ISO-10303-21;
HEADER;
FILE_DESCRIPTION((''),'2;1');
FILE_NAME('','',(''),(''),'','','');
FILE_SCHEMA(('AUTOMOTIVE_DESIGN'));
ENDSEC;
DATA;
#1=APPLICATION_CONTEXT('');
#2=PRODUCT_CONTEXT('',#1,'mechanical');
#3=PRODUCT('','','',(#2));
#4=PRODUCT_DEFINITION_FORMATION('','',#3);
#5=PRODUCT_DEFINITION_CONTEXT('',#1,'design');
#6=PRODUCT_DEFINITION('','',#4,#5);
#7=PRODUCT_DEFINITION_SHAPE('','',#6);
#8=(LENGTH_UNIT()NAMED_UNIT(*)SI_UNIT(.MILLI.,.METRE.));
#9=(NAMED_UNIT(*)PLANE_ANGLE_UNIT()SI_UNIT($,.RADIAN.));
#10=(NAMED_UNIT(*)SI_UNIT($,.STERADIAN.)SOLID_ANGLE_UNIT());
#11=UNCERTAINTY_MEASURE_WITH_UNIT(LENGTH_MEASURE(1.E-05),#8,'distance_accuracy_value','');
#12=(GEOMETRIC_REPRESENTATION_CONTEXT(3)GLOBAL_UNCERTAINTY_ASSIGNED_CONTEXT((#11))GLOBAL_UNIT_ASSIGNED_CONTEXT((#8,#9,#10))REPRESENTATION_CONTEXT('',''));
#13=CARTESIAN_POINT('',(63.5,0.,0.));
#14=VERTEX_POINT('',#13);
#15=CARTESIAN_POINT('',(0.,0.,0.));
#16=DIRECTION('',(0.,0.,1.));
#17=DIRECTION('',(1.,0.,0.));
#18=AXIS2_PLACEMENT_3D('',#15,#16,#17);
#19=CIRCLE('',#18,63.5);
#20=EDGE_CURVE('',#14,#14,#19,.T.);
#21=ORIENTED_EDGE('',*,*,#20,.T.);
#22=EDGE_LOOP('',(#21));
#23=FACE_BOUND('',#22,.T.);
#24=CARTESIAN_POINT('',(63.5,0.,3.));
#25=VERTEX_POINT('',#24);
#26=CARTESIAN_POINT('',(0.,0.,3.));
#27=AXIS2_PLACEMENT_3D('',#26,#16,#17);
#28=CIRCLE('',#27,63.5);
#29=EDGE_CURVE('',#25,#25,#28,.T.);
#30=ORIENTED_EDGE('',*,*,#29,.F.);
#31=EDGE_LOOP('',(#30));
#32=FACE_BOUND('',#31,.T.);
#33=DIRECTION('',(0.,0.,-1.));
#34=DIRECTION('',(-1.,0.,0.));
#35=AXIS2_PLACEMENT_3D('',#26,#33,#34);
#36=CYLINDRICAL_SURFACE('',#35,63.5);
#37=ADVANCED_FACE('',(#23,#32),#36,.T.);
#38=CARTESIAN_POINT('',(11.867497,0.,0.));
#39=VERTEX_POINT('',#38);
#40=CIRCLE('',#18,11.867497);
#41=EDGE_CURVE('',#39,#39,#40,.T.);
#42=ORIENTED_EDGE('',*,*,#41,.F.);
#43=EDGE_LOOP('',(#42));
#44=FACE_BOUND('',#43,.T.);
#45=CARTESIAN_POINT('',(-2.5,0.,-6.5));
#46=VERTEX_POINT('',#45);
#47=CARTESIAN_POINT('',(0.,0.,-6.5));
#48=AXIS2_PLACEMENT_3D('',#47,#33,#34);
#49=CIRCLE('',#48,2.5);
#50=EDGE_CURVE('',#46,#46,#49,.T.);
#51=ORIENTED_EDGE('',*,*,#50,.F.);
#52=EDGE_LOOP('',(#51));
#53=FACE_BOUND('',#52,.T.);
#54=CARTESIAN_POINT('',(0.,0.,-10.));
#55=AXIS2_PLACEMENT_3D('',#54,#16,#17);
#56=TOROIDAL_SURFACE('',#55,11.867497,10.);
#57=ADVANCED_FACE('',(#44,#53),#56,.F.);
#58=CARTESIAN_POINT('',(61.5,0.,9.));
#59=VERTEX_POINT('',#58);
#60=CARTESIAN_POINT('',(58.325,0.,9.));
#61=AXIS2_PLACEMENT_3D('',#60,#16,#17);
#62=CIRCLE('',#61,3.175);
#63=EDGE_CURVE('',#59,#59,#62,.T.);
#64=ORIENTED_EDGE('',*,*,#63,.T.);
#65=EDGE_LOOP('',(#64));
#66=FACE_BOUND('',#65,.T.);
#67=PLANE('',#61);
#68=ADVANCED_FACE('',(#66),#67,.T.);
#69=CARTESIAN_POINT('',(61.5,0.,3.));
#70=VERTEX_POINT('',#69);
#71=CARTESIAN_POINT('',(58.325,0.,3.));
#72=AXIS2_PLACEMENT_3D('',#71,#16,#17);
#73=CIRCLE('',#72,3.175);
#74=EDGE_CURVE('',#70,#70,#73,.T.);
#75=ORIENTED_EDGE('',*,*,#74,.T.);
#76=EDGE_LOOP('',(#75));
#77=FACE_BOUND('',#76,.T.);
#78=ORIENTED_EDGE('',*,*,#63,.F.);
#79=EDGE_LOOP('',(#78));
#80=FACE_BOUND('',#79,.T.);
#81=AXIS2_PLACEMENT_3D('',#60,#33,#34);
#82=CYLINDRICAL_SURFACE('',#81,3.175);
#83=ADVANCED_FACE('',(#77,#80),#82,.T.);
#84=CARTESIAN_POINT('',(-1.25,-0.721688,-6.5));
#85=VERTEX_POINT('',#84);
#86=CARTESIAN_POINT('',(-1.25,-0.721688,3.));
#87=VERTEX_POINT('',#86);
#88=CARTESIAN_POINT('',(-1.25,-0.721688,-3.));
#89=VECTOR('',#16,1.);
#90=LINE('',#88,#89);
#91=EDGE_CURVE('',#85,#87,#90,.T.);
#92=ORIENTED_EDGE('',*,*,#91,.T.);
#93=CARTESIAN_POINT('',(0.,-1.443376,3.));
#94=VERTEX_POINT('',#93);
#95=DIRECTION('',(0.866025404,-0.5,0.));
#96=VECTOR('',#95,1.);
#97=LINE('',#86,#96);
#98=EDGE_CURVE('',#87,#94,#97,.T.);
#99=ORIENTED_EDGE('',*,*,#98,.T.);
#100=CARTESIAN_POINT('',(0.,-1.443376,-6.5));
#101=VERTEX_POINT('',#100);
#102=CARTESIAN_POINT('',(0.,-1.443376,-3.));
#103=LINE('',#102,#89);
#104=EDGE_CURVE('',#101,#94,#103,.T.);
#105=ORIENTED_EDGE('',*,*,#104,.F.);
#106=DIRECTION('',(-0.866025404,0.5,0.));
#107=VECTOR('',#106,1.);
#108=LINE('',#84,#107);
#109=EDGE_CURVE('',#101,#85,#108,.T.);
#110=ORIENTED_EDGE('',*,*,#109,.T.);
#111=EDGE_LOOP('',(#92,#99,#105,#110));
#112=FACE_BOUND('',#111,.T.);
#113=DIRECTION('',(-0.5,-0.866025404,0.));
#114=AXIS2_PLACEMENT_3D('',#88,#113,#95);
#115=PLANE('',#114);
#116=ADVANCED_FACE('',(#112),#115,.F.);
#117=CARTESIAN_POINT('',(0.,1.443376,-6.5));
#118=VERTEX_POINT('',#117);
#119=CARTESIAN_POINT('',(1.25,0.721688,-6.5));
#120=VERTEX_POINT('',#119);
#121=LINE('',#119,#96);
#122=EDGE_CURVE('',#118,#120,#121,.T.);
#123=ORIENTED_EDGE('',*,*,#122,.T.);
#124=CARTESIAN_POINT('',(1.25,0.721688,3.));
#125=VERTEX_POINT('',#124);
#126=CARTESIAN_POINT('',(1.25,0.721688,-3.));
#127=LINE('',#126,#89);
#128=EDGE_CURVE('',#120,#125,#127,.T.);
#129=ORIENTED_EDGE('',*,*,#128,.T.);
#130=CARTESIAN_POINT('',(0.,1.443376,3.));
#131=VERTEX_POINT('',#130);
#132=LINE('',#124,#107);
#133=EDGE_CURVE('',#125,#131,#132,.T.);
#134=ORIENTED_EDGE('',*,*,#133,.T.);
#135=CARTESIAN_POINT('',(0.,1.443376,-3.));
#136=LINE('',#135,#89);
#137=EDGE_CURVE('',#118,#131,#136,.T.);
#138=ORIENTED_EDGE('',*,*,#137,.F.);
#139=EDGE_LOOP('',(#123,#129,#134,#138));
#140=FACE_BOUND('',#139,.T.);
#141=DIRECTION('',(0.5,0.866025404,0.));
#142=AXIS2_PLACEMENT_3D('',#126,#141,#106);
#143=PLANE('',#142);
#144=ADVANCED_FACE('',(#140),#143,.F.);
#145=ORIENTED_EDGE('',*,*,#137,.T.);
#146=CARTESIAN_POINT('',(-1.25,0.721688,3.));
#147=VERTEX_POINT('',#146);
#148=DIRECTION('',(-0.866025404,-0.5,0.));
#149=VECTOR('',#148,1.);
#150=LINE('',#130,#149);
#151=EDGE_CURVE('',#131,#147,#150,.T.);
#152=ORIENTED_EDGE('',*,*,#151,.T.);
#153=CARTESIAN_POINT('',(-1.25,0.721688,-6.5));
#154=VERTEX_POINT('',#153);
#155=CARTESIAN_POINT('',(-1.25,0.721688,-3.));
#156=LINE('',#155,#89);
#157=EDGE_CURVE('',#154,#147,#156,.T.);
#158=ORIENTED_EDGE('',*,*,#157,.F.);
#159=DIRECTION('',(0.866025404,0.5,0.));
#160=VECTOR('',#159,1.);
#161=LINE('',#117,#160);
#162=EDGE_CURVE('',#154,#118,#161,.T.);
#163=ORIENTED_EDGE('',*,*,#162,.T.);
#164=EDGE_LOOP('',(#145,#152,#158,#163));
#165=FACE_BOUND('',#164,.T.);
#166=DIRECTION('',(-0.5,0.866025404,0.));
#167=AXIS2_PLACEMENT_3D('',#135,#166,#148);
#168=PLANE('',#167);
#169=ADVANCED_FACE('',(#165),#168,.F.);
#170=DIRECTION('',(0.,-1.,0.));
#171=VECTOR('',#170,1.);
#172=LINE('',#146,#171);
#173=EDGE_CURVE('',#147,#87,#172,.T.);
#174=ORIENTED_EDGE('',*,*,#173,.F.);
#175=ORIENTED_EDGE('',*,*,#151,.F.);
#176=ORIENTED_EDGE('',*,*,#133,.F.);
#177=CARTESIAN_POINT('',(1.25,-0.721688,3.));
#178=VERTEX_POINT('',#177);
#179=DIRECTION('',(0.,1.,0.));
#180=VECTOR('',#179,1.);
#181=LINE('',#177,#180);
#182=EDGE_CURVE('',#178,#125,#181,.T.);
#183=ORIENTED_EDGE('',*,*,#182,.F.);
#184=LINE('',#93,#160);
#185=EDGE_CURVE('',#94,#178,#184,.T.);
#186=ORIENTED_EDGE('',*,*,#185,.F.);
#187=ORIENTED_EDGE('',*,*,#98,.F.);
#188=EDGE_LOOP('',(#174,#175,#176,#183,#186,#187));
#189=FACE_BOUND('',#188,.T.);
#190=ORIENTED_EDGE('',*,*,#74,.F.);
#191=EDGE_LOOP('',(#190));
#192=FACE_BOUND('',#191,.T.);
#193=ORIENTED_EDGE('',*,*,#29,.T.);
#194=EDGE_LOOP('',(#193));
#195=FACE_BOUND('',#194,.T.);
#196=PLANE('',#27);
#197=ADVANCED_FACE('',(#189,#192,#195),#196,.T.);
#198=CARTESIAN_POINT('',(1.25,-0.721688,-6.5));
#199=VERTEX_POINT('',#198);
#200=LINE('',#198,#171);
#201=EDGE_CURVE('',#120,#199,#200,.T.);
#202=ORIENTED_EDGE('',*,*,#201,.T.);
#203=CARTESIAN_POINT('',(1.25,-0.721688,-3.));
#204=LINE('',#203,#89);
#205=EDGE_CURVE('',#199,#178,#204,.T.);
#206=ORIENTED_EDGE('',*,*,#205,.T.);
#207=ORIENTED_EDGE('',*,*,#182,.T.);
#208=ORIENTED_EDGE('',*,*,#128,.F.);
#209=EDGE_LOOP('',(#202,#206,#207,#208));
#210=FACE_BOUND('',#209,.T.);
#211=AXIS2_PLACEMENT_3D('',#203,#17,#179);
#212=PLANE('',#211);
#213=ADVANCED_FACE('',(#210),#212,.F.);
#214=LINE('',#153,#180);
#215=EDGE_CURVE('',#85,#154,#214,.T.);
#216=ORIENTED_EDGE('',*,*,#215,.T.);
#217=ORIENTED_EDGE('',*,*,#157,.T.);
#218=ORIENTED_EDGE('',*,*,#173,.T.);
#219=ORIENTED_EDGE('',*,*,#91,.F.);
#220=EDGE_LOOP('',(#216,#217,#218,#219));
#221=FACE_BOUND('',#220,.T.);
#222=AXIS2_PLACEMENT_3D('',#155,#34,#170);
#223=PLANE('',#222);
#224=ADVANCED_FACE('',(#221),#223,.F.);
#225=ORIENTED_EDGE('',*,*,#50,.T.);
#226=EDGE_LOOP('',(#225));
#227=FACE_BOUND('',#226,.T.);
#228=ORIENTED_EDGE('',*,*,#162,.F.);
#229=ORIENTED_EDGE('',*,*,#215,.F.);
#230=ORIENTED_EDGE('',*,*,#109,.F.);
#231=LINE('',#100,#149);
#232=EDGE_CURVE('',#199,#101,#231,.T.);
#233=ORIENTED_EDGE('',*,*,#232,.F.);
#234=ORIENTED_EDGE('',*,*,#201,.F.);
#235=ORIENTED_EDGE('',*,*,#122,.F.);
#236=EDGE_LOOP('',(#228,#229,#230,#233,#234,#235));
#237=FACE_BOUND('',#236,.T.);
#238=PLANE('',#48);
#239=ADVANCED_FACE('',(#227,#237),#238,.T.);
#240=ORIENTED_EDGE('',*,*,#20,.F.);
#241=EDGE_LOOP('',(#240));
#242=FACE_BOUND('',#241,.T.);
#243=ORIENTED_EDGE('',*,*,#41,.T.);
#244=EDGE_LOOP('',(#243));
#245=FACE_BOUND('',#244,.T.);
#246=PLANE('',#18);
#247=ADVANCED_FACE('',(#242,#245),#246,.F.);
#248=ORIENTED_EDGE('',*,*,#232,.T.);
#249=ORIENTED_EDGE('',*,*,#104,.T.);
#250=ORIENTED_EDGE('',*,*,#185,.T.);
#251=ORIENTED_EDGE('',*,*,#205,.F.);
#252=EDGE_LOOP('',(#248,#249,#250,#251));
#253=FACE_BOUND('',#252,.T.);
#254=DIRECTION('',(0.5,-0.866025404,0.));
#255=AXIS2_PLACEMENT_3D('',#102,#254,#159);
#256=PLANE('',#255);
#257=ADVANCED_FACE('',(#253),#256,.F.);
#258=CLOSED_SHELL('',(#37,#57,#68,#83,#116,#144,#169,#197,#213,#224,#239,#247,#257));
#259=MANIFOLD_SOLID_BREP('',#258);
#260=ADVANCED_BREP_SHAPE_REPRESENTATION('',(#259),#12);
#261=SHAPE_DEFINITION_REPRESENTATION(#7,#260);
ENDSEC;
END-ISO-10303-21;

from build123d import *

# Parameters (mm, degrees)
SKETCH1_R           = 63.5
BOSS_EXTRUDE1_DEPTH = 3
SKETCH3_R           = 3.175
BOSS_EXTRUDE2_DEPTH = 6
CUT_EXTRUDE1_DEPTH  = 6
SKETCH5_R           = 2.5
BOSS_EXTRUDE3_DEPTH = 6.5
FILLET1_R           = 10


with BuildPart() as part:
    # Sketch1 → Boss-Extrude1 (new body)
    with BuildSketch(Plane.XY):
        Circle(SKETCH1_R)
    extrude(amount=BOSS_EXTRUDE1_DEPTH)

    # Sketch3 → Boss-Extrude2 (add)
    with BuildSketch(Plane.XY.offset(3)):
        with Locations((58.325, 0)):
            Circle(SKETCH3_R)
    extrude(amount=BOSS_EXTRUDE2_DEPTH)

    # Sketch4 → Cut-Extrude1 (cut)
    with BuildSketch(Plane.XY.offset(3)):
        Polygon((0, 1.443375673), (-1.25, 0.721687836), (-1.25, -0.721687836), (0, -1.443375673), (1.25, -0.721687836), (1.25, 0.721687836), align=None)
    extrude(amount=-CUT_EXTRUDE1_DEPTH, mode=Mode.SUBTRACT)

    # Sketch5 → Boss-Extrude3 (add)
    with BuildSketch(Plane(origin=(0, 0, 0), x_dir=(-1, 0, 0), z_dir=(0, 0, -1))):
        with Locations(Location((0, 0, 0), (0, 0, 180))):
            Circle(SKETCH5_R)
        Polygon((-1.25, 0.721687836), (0, 1.443375673), (1.25, 0.721687836), (1.25, -0.721687836), (0, -1.443375673), (-1.25, -0.721687836), align=None, mode=Mode.SUBTRACT)
    extrude(amount=BOSS_EXTRUDE3_DEPTH)

    # Fillet1
    # the kernel refuses this fillet: 10 mm, written as the material it adds along each edge
    with BuildSketch(Plane(origin=(0, 0, 0), x_dir=(1, 0, 0), z_dir=(0, 1, 0))) as fillet1_piece_1:
        with BuildLine():
            CenterArc((11.867496998, 10), FILLET1_R, 200.487315115, 69.512684885)
            Line((11.867496998, 0), (11.867496998, -0.2))
            Line((11.867496998, -0.2), (2.5, -0.2))
            Line((2.5, -0.2), (2.3, 0))
            ThreePointArc((2.3, 0), (2.3, 3.25), (2.31265006, 6.43))
            Line((2.31265006, 6.43), (2.5, 6.5))
        make_face()
    revolve(axis=Axis((0, 0, 0), (0, 0, -1)))


solid = part.part
